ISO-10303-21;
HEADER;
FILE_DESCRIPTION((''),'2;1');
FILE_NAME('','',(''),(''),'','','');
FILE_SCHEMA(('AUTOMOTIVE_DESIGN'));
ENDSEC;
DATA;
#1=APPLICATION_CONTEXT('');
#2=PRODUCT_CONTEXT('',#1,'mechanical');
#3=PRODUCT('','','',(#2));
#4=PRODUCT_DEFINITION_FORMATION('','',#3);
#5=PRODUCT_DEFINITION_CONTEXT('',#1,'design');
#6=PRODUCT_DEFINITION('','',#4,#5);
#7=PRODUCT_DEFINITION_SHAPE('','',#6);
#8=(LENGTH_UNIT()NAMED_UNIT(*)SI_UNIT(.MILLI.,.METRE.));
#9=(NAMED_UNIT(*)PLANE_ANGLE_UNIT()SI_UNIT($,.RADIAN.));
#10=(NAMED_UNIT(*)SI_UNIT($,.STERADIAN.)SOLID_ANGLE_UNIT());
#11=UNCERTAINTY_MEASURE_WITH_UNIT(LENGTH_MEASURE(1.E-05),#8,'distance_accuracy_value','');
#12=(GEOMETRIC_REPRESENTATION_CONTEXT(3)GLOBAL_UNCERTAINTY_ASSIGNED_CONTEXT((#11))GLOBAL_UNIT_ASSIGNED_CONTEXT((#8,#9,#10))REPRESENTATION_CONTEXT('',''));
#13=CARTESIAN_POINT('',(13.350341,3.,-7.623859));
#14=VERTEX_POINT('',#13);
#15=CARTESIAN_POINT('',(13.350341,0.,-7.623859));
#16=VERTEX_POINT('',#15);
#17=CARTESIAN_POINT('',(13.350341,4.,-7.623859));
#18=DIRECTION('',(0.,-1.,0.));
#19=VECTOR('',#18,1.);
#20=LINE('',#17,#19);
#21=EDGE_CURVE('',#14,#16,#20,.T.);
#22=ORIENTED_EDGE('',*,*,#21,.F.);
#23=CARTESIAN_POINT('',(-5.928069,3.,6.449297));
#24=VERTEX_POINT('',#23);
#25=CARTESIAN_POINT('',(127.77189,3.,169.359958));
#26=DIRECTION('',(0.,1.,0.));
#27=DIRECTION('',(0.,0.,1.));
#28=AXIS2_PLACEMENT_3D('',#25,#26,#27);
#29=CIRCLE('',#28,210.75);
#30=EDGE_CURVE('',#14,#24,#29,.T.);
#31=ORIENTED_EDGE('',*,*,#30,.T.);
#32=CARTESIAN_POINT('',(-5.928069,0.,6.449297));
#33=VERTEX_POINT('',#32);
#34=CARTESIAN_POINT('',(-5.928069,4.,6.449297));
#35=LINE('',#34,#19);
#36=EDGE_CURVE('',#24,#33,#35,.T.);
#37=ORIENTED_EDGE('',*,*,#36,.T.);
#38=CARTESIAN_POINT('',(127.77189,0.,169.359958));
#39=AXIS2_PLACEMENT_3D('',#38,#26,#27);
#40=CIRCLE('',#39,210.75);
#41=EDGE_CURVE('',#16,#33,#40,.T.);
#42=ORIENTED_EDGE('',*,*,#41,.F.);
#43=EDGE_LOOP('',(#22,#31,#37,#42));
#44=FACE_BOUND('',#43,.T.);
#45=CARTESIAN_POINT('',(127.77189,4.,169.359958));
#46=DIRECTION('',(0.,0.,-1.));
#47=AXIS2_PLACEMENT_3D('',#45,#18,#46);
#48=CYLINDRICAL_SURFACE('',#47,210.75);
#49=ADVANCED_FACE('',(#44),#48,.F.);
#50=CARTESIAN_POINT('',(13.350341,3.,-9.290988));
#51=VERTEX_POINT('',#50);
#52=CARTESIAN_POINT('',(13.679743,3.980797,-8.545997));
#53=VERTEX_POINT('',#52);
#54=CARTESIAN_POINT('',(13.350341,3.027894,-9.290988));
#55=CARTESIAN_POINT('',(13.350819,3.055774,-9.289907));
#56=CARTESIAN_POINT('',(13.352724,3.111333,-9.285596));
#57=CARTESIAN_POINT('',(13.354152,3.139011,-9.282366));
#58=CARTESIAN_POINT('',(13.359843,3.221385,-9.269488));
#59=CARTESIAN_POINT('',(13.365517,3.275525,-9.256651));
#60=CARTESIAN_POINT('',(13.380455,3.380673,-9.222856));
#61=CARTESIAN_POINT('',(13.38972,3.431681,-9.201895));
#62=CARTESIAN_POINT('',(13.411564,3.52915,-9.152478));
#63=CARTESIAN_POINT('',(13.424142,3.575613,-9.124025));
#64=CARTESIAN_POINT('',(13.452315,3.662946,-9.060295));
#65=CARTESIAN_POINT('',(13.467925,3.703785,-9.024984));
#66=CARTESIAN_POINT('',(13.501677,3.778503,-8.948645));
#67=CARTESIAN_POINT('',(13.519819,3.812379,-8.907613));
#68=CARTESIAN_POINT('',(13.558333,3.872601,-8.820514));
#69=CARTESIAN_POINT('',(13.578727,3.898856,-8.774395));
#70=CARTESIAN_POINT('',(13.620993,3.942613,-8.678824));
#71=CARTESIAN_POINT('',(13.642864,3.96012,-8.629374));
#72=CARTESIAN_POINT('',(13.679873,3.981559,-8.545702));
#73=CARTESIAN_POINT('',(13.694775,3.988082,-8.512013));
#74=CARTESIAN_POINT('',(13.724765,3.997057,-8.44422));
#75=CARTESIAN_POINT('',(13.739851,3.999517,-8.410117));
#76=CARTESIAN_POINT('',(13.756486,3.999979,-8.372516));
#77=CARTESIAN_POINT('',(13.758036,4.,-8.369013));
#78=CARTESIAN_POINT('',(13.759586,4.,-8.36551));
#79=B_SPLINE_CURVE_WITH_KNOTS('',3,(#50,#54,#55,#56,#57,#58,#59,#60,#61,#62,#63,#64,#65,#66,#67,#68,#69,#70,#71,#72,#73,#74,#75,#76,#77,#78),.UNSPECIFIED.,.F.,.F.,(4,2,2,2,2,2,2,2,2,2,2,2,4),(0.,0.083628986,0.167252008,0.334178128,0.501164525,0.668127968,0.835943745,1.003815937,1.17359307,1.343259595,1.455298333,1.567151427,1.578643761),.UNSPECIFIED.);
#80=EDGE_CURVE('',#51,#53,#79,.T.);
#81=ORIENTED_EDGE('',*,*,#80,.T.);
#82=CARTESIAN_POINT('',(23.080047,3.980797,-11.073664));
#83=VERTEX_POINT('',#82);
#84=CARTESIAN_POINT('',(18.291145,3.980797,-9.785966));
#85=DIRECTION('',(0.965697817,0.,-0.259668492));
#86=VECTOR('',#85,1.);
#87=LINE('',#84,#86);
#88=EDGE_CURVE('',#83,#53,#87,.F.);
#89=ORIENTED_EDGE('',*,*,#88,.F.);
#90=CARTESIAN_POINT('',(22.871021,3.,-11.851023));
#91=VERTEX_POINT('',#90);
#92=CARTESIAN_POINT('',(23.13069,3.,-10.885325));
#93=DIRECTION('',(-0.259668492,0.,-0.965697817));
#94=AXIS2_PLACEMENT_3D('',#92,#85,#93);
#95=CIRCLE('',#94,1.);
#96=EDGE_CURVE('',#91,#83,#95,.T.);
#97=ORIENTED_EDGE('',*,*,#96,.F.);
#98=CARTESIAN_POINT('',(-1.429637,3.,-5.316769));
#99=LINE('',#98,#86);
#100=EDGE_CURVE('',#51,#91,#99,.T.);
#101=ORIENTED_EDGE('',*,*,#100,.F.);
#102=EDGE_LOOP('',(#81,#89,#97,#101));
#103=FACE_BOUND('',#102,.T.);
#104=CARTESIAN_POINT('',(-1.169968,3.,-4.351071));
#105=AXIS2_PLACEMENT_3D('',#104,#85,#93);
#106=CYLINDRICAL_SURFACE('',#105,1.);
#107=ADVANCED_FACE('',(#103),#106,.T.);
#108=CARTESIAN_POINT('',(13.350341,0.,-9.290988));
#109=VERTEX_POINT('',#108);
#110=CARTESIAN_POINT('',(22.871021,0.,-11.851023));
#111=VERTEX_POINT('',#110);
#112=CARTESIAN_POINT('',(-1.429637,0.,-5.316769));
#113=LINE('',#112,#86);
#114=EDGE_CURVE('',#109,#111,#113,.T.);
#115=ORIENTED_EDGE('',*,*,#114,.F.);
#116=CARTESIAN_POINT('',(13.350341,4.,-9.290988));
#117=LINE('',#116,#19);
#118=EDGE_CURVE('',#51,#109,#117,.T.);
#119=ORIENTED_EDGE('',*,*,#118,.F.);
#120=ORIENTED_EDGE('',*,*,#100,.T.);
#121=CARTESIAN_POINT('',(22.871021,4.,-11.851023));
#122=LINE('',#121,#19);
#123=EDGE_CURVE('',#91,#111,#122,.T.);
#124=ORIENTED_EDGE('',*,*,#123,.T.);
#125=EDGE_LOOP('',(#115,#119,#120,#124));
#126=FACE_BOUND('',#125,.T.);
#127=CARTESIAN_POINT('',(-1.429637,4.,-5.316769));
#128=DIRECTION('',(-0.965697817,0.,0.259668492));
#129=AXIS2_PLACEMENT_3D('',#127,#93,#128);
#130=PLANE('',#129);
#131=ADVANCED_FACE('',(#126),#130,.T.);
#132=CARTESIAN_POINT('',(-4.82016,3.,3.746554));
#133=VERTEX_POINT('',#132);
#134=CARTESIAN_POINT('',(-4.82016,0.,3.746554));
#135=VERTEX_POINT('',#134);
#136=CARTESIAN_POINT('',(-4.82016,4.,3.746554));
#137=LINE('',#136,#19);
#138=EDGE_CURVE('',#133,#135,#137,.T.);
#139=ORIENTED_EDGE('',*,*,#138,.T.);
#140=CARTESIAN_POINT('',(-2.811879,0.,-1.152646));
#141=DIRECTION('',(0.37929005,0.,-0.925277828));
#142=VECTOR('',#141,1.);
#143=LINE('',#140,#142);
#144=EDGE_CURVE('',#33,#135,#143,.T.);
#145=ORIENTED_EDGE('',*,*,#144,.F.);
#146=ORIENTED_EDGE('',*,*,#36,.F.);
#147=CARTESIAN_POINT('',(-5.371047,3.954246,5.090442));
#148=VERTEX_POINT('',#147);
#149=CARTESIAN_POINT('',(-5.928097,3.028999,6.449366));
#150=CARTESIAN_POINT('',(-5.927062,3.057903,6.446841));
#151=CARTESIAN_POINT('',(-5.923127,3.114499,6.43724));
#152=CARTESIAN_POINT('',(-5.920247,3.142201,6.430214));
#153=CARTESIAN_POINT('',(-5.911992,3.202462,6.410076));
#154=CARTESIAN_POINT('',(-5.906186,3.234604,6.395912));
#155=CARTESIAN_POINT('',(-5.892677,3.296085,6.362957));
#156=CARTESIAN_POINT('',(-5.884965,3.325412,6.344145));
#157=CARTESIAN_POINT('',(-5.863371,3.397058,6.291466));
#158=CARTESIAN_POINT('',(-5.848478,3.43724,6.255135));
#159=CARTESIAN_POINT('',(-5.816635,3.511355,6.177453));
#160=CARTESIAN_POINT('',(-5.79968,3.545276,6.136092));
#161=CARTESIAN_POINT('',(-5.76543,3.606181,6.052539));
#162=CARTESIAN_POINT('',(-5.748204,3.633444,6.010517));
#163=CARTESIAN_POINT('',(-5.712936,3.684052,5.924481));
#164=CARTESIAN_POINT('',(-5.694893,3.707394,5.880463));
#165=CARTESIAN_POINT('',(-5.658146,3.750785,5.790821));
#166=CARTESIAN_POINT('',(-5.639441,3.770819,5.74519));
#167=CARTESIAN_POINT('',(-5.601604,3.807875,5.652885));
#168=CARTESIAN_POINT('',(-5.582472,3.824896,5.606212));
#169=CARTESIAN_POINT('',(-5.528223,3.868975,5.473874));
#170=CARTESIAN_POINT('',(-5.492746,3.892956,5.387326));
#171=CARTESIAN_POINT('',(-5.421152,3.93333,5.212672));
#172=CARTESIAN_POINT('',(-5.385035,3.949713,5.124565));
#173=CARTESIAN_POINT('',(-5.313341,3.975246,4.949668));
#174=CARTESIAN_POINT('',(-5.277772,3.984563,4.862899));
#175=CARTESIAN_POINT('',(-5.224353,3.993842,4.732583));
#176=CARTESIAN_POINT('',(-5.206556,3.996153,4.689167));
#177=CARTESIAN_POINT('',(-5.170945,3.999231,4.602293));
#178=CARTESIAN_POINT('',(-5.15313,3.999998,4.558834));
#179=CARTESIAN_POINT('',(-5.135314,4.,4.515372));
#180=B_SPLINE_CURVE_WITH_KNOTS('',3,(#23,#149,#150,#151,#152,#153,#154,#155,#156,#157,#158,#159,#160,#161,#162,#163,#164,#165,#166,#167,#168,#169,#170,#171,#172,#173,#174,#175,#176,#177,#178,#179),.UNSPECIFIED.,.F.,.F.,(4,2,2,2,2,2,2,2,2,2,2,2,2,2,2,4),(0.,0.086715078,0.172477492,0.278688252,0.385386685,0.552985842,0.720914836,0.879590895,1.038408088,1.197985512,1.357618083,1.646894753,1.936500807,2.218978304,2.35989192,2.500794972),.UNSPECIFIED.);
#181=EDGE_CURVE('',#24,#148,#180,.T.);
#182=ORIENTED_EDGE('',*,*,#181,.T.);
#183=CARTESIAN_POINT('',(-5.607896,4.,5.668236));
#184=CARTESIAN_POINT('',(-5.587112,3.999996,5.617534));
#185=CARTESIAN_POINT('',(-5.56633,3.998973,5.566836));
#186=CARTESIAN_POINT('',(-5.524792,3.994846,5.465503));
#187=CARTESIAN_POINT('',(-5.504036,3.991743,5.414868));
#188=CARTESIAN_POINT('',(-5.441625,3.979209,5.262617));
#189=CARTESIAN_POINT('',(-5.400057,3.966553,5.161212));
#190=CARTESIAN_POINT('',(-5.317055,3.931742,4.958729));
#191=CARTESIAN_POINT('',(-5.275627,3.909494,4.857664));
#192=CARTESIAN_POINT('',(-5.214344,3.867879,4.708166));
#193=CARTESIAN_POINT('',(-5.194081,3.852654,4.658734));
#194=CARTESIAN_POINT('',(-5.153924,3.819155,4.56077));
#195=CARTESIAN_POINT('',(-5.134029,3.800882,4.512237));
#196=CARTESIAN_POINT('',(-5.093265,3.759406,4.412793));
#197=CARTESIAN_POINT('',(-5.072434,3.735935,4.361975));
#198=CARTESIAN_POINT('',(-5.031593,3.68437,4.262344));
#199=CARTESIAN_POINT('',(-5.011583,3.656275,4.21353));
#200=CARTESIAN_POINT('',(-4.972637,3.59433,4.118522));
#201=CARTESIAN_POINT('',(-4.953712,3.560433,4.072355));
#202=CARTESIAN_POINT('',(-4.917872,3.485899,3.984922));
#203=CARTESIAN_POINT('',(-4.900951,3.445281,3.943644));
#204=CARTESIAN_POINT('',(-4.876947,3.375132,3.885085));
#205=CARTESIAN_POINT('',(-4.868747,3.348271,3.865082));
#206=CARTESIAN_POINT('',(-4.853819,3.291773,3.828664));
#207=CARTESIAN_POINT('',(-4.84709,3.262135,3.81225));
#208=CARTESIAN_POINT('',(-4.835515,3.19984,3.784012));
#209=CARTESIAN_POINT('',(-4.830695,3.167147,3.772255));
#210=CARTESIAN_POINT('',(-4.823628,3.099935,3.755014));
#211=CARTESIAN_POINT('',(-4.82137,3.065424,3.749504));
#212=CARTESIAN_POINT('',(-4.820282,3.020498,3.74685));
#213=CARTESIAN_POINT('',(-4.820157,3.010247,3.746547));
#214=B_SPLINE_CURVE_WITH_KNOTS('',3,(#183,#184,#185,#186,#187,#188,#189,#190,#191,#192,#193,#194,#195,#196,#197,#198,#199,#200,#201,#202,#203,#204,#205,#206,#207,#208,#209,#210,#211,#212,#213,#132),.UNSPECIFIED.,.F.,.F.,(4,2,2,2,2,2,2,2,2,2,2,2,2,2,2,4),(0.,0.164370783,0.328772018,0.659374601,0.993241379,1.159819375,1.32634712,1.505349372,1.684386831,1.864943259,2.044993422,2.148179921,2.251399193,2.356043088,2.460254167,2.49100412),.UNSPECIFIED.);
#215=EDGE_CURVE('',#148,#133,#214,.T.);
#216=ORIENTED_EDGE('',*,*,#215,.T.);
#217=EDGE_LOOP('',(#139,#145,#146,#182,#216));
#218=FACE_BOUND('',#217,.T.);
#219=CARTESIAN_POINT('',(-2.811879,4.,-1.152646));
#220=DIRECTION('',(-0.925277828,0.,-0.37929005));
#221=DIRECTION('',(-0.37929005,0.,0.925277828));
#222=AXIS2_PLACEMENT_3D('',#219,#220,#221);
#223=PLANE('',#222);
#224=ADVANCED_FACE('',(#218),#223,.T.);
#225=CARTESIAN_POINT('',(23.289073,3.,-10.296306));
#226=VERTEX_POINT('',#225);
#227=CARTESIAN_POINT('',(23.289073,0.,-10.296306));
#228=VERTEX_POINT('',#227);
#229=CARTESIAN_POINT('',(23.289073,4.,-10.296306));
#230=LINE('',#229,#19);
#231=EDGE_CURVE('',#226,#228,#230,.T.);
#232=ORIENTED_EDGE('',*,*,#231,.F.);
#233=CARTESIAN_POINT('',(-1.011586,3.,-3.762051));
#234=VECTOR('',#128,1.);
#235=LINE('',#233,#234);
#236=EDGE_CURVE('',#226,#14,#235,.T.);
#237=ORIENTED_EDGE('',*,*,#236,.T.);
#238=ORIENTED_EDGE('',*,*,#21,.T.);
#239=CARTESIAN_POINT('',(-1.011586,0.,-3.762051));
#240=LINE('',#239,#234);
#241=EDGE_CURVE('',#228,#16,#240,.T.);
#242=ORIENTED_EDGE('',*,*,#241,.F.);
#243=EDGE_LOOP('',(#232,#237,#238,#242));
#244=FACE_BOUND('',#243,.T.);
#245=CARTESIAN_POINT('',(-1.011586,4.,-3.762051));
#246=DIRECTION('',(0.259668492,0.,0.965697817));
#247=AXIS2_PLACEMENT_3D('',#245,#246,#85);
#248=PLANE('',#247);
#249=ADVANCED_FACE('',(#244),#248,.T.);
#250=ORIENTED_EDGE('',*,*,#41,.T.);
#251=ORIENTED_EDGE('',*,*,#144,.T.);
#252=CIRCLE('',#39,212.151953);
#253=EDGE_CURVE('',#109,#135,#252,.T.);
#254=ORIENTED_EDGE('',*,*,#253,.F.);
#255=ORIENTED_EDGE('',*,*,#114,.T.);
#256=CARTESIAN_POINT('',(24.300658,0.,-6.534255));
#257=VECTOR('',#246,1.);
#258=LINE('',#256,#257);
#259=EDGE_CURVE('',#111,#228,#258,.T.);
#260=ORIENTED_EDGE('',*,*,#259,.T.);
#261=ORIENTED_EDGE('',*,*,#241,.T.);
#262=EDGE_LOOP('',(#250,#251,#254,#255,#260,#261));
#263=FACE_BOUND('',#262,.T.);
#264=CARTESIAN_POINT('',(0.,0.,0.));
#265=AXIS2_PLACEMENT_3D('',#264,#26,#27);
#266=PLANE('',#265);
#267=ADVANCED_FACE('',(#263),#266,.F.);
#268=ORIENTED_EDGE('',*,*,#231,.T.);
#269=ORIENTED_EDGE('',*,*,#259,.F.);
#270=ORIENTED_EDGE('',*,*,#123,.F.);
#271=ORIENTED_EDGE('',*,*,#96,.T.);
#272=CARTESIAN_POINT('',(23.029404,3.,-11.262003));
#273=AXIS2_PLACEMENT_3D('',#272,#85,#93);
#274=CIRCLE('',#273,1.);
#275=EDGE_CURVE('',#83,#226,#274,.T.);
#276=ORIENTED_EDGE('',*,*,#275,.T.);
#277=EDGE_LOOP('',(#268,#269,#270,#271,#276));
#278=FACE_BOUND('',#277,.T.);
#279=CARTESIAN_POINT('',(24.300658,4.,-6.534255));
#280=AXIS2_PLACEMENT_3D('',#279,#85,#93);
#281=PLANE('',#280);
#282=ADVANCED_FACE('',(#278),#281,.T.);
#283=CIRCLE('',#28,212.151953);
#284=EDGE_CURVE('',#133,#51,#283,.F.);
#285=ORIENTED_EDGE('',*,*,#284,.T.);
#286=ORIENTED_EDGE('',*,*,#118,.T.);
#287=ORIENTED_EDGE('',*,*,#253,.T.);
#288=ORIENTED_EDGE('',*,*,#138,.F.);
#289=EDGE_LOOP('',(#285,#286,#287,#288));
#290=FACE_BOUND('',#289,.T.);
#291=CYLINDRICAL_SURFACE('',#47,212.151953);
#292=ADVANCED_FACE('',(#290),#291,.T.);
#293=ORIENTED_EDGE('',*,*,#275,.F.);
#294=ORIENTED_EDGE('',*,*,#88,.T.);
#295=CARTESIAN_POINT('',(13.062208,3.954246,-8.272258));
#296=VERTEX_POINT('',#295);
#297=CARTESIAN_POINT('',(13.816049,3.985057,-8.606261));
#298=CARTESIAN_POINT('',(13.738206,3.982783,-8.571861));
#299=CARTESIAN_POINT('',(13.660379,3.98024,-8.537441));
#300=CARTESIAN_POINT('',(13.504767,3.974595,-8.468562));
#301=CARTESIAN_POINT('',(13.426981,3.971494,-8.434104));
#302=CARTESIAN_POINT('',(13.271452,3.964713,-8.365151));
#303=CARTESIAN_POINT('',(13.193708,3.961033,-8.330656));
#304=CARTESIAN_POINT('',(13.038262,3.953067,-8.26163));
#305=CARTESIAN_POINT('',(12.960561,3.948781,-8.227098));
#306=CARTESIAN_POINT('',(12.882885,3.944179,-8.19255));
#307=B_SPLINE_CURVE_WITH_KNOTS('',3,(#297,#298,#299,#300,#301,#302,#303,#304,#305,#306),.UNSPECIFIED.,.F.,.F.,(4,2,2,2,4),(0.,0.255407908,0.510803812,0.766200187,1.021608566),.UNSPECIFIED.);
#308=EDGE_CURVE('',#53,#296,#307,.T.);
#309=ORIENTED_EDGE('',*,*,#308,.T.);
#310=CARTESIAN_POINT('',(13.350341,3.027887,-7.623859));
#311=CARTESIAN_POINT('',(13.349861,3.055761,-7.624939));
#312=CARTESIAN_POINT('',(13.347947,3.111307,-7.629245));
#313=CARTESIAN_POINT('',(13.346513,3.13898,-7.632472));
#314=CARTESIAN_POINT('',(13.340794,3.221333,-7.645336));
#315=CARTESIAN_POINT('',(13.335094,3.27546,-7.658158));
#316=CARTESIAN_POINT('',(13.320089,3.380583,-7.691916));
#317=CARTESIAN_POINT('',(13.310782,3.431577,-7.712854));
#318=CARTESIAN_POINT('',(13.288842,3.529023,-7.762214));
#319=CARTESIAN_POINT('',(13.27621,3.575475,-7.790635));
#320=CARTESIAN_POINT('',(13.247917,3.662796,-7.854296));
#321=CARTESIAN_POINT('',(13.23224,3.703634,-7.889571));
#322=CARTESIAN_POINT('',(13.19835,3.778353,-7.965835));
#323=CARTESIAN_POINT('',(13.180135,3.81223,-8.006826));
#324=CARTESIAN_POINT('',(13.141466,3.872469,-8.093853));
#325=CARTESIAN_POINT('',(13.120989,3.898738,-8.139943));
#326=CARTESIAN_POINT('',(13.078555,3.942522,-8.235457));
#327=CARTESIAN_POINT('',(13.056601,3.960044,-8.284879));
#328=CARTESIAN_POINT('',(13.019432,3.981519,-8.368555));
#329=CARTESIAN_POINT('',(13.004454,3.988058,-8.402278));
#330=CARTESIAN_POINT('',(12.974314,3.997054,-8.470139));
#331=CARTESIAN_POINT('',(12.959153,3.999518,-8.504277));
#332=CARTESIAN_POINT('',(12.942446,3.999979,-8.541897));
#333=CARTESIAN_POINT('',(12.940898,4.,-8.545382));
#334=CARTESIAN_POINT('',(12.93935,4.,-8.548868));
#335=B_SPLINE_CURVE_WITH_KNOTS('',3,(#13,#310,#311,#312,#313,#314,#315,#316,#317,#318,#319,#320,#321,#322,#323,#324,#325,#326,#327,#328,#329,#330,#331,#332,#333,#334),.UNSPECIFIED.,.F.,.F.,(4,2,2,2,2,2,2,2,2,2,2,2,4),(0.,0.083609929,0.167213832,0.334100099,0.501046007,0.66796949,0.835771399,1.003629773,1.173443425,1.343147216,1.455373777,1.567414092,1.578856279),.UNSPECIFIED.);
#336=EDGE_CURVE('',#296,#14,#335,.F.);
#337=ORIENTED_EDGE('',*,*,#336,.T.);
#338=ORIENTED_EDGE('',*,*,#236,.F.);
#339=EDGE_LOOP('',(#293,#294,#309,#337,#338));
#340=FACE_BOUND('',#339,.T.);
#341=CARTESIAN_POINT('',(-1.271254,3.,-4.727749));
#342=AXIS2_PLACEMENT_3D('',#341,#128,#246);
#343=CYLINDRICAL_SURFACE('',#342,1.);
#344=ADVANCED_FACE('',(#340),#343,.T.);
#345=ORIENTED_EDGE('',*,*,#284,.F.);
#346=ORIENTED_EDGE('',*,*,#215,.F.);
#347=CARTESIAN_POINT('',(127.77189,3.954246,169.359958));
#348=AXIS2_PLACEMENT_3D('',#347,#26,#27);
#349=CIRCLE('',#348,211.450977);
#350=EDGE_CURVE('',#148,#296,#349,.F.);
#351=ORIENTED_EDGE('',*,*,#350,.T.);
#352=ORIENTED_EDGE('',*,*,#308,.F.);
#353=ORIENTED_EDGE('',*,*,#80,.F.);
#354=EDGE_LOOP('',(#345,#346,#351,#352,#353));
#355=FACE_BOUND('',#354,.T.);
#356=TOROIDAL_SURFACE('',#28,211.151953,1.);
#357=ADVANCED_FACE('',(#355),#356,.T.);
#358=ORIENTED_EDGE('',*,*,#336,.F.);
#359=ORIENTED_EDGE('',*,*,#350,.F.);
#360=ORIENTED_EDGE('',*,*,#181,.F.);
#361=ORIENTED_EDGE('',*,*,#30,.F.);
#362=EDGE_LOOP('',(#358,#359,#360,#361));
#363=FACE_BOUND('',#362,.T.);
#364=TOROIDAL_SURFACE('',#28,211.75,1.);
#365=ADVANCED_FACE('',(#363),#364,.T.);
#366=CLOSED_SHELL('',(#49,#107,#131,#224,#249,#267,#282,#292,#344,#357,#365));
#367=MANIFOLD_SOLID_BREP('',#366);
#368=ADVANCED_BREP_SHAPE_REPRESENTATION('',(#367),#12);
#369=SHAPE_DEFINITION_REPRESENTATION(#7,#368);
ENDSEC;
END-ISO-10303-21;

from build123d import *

# Parameters (mm, degrees)
EXTRUDE_1_DEPTH = 4
FILLET_1_R      = 1


with BuildPart() as part:
    # 草图1 → 凸台-拉伸1 (new body)
    with BuildSketch(Plane(origin=(0, 0, 0), x_dir=(1, 0, 0), z_dir=(0, 1, 0))):
        with BuildLine():
            Line((-5.928068954, -6.449296909), (-4.820160255, -3.746554363))
            ThreePointArc((-4.820160255, -3.746554363), (4.093177489, 3.01181264), (13.350341007, 9.290987577))
            Line((13.350341007, 9.290987577), (22.871021424, 11.851023114))
            Line((22.871021424, 11.851023114), (23.289072647, 10.296305596))
            Line((23.289072647, 10.296305596), (13.350341007, 7.623859397))
            ThreePointArc((13.350341007, 7.623859397), (3.511743095, 0.860423855), (-5.928068954, -6.449296909))
        make_face()
    extrude(amount=EXTRUDE_1_DEPTH)

    # 圆角1
    # the kernel refuses this fillet: 1 mm, written as the material it takes off along each edge
    with BuildSketch(Plane(origin=(127.771889532, 4, 169.359958319), x_dir=(-0.6341416592780885, 0, -0.7732168880514914), z_dir=(-0.7732168880514914, 0, 0.6341416592780885))) as fillet_1_piece_1:
        with BuildLine():
            CenterArc((212.151953176 - FILLET_1_R, FILLET_1_R), FILLET_1_R, 270, 90)
            Line((212.151953176 - FILLET_1_R, 0), (212.151953176, 0))
            Line((212.151953176, 0), (212.151953176, FILLET_1_R))
        make_face()
    revolve(axis=Axis((127.771889532, 4, 169.359958319), (0, -1, 0)), revolution_arc=7.865584332, mode=Mode.SUBTRACT)
    # the kernel refuses this fillet: 1 mm, written as the material it takes off along each edge
    with BuildSketch(Plane(origin=(12.521058721, 4, -9.06800014), x_dir=(0.2596684924125265, 0, 0.9656978171499642), z_dir=(0.9656978171499642, 0, -0.2596684924125265))) as fillet_1_2_piece_1:
        with BuildLine():
            CenterArc((FILLET_1_R, FILLET_1_R), FILLET_1_R, 180, 90)
            Line((0, FILLET_1_R), (0, 0))
            Line((0, 0), (FILLET_1_R, 0))
        make_face()
    extrude(amount=13.21759977, mode=Mode.SUBTRACT)
    # the kernel refuses this fillet: 1 mm, written as the material it takes off along each edge
    with BuildSketch(Plane(origin=(25.70331719, 4, -10.945476827), x_dir=(-0.25966849241252477, 0, -0.9656978171499647), z_dir=(-0.9656978171499647, 0, 0.25966849241252477))) as fillet_1_3_piece_1_section:
        with BuildLine():
            CenterArc((FILLET_1_R, FILLET_1_R), FILLET_1_R, 180, 90)
            Line((0, FILLET_1_R), (0, 0))
            Line((0, 0), (FILLET_1_R, 0))
        make_face()
    fillet_1_3_piece_1 = extrude(amount=15.291761526, mode=Mode.PRIVATE)
    fillet_1_3_piece_1 = fillet_1_3_piece_1 & Plane(origin=(127.771889532, 4, 169.359958319), x_dir=(-0.5429254971555654, 0, -0.8397808669756547), z_dir=(0, -1, 0)) * Cylinder(210.75, 35, mode=Mode.PRIVATE)
    add(fillet_1_3_piece_1, mode=Mode.SUBTRACT)
    # the kernel refuses this fillet: 1 mm, written as the material it takes off along each edge
    with BuildSketch(Plane(origin=(127.771889532, 4, 169.359958319), x_dir=(-0.6435256080636699, 0, -0.765424582677016), z_dir=(-0.765424582677016, 0, 0.6435256080636699))) as fillet_1_4_piece_1_section:
        with BuildLine():
            CenterArc((210.75 + FILLET_1_R, FILLET_1_R), FILLET_1_R, 180, 90)
            Line((210.75 + FILLET_1_R, 0), (210.75, 0))
            Line((210.75, 0), (210.75, FILLET_1_R))
        make_face()
    fillet_1_4_piece_1 = revolve(axis=Axis((127.771889532, 4, 169.359958319), (0, -1, 0)), revolution_arc=8.877330019, mode=Mode.PRIVATE)
    fillet_1_4_piece_1 = fillet_1_4_piece_1 - Plane(origin=(75.416344667, 3, -25.348436689), x_dir=(0, 1, 0), z_dir=(0.9656978171499647, 0, -0.25966849241252477)) * Cylinder(1, 848, mode=Mode.PRIVATE)
    add(fillet_1_4_piece_1, mode=Mode.SUBTRACT)


solid = part.part
